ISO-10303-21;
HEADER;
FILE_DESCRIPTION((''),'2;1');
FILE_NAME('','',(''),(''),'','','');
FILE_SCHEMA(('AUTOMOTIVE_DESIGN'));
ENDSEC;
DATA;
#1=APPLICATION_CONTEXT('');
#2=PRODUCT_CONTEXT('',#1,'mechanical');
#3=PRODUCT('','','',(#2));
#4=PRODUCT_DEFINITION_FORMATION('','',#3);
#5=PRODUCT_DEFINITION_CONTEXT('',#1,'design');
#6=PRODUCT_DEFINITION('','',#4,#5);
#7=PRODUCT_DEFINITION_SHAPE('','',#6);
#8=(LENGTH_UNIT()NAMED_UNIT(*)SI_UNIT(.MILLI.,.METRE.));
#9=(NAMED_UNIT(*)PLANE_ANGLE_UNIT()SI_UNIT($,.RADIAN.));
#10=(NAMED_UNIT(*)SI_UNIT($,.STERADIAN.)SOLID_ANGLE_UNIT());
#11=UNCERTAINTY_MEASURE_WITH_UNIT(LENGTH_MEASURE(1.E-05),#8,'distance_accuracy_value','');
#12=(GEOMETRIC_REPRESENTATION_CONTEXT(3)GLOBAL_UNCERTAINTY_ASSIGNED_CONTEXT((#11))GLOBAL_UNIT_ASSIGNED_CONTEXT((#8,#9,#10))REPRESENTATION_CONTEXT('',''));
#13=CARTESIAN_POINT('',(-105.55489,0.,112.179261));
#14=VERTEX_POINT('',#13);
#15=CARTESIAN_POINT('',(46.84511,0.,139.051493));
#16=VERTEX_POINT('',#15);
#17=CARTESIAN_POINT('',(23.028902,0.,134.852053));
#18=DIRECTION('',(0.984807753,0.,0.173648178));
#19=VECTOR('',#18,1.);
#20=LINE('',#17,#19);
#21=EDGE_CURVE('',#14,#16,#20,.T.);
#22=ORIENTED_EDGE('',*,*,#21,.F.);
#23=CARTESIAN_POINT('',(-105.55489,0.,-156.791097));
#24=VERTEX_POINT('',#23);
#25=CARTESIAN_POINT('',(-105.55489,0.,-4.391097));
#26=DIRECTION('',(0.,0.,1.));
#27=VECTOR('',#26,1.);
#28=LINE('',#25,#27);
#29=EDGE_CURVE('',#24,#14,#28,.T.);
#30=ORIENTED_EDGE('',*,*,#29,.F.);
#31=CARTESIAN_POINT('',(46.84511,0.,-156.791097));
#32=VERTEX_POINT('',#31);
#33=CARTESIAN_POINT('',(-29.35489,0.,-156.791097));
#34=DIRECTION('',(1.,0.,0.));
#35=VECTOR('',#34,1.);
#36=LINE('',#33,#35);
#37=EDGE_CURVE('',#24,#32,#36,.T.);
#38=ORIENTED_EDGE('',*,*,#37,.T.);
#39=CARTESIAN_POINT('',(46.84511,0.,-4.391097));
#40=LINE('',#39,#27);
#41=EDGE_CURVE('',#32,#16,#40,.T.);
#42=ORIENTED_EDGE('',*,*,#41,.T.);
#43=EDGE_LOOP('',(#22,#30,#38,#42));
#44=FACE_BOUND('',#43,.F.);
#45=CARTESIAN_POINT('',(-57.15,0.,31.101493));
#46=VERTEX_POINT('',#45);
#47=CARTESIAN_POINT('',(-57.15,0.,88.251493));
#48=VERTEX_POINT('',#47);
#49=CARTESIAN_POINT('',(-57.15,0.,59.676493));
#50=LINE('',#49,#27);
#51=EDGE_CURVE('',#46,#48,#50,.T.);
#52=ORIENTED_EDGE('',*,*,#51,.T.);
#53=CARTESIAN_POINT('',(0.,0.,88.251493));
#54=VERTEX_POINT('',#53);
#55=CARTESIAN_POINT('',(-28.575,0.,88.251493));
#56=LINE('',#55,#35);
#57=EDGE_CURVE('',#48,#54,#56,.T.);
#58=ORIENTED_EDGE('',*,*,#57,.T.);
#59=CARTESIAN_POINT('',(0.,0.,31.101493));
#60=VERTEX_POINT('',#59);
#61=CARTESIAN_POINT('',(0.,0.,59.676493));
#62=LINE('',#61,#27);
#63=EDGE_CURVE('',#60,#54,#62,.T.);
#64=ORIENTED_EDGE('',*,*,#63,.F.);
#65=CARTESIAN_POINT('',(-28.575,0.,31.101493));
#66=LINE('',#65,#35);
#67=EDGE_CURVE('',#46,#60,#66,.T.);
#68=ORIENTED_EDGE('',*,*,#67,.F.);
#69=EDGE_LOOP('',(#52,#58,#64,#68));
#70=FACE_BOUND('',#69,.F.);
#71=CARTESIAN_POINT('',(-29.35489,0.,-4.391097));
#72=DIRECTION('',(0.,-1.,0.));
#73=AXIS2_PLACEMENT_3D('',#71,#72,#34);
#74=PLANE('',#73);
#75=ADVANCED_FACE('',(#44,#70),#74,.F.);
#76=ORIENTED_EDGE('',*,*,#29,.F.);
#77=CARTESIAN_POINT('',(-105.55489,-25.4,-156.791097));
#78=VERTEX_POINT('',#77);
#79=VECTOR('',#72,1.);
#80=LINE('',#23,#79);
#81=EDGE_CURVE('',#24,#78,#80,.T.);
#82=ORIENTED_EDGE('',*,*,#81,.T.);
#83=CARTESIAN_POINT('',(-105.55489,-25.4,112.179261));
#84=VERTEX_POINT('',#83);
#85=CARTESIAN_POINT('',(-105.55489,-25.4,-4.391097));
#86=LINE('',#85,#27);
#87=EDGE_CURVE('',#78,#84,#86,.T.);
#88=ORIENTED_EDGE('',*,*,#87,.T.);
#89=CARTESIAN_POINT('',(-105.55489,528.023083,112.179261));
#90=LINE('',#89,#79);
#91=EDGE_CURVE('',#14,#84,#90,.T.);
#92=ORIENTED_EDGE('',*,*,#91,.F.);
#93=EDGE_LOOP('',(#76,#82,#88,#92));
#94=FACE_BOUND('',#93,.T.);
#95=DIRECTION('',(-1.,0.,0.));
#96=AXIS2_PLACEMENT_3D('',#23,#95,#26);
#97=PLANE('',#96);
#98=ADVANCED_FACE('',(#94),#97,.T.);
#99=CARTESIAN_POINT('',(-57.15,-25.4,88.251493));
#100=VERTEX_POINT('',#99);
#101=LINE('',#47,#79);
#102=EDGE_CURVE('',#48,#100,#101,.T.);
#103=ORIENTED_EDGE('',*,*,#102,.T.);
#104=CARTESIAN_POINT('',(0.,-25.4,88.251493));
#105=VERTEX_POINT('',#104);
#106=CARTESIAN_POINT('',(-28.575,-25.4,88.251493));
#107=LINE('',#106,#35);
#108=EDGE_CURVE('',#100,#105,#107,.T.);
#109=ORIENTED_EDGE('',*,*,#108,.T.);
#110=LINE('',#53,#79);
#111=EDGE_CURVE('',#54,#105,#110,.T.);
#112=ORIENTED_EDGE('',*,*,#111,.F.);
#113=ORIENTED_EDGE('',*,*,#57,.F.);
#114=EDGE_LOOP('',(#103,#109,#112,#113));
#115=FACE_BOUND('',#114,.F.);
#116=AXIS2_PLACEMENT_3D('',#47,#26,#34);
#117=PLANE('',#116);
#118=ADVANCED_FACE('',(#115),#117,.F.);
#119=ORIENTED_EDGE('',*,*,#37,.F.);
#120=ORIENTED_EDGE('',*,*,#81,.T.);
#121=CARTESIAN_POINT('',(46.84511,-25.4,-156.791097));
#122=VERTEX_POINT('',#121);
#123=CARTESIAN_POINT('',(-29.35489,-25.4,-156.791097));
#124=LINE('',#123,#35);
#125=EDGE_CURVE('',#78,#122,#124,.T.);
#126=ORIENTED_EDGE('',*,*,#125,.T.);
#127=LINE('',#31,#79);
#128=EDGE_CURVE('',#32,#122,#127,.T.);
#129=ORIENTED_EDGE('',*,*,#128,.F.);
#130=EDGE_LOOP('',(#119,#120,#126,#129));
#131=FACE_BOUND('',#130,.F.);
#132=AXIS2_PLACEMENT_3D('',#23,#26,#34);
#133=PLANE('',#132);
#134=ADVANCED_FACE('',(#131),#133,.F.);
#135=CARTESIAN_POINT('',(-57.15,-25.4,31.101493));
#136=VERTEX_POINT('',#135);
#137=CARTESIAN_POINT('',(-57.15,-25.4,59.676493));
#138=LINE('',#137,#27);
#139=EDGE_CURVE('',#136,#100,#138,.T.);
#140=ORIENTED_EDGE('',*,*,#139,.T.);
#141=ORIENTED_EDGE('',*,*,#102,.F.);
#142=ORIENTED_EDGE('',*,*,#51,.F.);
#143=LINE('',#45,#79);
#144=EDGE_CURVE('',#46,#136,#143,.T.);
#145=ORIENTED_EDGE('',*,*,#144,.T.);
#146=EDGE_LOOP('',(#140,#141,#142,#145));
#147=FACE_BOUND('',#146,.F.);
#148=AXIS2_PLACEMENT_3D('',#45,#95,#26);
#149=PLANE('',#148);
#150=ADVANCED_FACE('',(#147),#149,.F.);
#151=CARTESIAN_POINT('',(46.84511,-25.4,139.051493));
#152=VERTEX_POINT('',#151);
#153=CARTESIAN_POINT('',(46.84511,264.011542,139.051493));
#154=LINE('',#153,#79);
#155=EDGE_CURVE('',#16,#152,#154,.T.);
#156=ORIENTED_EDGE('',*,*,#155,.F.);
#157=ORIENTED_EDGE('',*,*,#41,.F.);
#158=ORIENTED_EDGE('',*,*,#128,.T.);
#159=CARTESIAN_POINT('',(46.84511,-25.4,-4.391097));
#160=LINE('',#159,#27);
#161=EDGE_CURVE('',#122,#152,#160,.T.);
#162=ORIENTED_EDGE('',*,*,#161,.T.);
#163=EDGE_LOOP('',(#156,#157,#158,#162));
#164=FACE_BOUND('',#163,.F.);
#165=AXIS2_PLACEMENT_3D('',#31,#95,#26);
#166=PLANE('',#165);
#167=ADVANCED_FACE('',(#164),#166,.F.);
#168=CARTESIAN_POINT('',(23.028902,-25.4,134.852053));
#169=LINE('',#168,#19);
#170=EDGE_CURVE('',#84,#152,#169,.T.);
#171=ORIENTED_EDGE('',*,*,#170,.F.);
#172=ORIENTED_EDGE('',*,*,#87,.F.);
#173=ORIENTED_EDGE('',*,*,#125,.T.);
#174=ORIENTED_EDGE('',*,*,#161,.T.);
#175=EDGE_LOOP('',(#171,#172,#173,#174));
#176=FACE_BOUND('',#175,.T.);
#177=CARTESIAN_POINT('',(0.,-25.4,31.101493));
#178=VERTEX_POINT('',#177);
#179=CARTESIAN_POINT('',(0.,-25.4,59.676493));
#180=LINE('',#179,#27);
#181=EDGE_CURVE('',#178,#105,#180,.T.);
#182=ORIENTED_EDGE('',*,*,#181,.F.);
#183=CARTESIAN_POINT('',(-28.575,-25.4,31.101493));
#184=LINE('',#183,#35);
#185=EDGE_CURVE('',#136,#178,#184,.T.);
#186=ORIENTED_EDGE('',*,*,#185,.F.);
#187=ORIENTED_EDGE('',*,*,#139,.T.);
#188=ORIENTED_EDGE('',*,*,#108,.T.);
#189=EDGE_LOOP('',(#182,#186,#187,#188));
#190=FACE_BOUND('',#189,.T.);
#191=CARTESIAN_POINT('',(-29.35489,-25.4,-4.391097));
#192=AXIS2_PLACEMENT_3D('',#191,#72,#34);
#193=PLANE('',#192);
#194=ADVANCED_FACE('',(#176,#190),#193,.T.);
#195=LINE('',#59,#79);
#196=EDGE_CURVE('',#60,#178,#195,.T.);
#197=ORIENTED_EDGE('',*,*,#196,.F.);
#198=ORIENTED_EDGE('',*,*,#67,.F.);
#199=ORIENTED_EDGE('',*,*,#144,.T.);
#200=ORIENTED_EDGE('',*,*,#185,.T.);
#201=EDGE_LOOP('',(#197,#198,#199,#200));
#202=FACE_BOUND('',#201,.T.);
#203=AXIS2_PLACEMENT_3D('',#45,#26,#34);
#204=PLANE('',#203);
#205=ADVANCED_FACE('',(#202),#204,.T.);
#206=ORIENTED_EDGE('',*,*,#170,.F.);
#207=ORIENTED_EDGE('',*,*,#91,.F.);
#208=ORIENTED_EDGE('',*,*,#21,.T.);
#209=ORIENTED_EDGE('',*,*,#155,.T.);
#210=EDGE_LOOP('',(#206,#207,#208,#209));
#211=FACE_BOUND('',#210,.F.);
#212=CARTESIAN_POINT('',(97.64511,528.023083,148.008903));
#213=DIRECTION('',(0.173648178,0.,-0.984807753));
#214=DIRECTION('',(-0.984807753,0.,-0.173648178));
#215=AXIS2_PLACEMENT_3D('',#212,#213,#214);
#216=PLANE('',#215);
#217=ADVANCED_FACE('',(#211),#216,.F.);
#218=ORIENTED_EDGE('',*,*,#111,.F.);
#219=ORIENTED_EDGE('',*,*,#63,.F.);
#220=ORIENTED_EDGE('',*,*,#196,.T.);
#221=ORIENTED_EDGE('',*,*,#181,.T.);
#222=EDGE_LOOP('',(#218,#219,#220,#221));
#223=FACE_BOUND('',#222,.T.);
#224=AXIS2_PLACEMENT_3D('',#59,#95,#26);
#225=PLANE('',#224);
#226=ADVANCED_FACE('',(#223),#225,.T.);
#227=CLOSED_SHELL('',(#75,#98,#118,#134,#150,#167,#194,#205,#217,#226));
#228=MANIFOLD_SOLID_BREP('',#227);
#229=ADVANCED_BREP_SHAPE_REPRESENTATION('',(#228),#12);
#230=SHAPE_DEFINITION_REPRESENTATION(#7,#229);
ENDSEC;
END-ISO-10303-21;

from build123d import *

# Parameters (mm, degrees)
F0_W        = 152.4
F0_H        = 304.8
F1_DEPTH    = 25.4
F2_T1_DEPTH = 1081.4461668656
F3_W        = 57.15
F3_H        = 57.15
F4_DEPTH    = 25.4


# Not quite as in the source:
# - a fillet or chamfer that OpenCascade refuses, or shapes differently, is made with other operations: its cross-section is extruded or revolved along the edge and cut away or added


with BuildPart() as f1:
    # F0 (on Front) → F1 (new body)
    with BuildSketch(Plane.XZ):
        with Locations((-29.3548897063, -4.3910965323)):
            Rectangle(F0_W, F0_H)
    extrude(amount=F1_DEPTH)

    # F2: chamfer of 203.2 x 35.82964248 on 1 edges, made by hand

    # F2_s2 → F2_t1 (cut)
    with BuildSketch(Plane.XZ.offset(-528.0230834328)):
        Polygon((97.6451102937, 148.0089034677), (-105.5548897063, 112.1792609877), (-105.5548897063, 148.0089034677), align=None)
    extrude(amount=F2_T1_DEPTH, mode=Mode.SUBTRACT)

    # F3 (on face) → F4 (cut, through all)
    with BuildSketch(Plane.XZ):
        with Locations((-28.575, 59.6764928477)):
            Rectangle(F3_W, F3_H)
    extrude(amount=F4_DEPTH, mode=Mode.SUBTRACT)


solid = f1.part
